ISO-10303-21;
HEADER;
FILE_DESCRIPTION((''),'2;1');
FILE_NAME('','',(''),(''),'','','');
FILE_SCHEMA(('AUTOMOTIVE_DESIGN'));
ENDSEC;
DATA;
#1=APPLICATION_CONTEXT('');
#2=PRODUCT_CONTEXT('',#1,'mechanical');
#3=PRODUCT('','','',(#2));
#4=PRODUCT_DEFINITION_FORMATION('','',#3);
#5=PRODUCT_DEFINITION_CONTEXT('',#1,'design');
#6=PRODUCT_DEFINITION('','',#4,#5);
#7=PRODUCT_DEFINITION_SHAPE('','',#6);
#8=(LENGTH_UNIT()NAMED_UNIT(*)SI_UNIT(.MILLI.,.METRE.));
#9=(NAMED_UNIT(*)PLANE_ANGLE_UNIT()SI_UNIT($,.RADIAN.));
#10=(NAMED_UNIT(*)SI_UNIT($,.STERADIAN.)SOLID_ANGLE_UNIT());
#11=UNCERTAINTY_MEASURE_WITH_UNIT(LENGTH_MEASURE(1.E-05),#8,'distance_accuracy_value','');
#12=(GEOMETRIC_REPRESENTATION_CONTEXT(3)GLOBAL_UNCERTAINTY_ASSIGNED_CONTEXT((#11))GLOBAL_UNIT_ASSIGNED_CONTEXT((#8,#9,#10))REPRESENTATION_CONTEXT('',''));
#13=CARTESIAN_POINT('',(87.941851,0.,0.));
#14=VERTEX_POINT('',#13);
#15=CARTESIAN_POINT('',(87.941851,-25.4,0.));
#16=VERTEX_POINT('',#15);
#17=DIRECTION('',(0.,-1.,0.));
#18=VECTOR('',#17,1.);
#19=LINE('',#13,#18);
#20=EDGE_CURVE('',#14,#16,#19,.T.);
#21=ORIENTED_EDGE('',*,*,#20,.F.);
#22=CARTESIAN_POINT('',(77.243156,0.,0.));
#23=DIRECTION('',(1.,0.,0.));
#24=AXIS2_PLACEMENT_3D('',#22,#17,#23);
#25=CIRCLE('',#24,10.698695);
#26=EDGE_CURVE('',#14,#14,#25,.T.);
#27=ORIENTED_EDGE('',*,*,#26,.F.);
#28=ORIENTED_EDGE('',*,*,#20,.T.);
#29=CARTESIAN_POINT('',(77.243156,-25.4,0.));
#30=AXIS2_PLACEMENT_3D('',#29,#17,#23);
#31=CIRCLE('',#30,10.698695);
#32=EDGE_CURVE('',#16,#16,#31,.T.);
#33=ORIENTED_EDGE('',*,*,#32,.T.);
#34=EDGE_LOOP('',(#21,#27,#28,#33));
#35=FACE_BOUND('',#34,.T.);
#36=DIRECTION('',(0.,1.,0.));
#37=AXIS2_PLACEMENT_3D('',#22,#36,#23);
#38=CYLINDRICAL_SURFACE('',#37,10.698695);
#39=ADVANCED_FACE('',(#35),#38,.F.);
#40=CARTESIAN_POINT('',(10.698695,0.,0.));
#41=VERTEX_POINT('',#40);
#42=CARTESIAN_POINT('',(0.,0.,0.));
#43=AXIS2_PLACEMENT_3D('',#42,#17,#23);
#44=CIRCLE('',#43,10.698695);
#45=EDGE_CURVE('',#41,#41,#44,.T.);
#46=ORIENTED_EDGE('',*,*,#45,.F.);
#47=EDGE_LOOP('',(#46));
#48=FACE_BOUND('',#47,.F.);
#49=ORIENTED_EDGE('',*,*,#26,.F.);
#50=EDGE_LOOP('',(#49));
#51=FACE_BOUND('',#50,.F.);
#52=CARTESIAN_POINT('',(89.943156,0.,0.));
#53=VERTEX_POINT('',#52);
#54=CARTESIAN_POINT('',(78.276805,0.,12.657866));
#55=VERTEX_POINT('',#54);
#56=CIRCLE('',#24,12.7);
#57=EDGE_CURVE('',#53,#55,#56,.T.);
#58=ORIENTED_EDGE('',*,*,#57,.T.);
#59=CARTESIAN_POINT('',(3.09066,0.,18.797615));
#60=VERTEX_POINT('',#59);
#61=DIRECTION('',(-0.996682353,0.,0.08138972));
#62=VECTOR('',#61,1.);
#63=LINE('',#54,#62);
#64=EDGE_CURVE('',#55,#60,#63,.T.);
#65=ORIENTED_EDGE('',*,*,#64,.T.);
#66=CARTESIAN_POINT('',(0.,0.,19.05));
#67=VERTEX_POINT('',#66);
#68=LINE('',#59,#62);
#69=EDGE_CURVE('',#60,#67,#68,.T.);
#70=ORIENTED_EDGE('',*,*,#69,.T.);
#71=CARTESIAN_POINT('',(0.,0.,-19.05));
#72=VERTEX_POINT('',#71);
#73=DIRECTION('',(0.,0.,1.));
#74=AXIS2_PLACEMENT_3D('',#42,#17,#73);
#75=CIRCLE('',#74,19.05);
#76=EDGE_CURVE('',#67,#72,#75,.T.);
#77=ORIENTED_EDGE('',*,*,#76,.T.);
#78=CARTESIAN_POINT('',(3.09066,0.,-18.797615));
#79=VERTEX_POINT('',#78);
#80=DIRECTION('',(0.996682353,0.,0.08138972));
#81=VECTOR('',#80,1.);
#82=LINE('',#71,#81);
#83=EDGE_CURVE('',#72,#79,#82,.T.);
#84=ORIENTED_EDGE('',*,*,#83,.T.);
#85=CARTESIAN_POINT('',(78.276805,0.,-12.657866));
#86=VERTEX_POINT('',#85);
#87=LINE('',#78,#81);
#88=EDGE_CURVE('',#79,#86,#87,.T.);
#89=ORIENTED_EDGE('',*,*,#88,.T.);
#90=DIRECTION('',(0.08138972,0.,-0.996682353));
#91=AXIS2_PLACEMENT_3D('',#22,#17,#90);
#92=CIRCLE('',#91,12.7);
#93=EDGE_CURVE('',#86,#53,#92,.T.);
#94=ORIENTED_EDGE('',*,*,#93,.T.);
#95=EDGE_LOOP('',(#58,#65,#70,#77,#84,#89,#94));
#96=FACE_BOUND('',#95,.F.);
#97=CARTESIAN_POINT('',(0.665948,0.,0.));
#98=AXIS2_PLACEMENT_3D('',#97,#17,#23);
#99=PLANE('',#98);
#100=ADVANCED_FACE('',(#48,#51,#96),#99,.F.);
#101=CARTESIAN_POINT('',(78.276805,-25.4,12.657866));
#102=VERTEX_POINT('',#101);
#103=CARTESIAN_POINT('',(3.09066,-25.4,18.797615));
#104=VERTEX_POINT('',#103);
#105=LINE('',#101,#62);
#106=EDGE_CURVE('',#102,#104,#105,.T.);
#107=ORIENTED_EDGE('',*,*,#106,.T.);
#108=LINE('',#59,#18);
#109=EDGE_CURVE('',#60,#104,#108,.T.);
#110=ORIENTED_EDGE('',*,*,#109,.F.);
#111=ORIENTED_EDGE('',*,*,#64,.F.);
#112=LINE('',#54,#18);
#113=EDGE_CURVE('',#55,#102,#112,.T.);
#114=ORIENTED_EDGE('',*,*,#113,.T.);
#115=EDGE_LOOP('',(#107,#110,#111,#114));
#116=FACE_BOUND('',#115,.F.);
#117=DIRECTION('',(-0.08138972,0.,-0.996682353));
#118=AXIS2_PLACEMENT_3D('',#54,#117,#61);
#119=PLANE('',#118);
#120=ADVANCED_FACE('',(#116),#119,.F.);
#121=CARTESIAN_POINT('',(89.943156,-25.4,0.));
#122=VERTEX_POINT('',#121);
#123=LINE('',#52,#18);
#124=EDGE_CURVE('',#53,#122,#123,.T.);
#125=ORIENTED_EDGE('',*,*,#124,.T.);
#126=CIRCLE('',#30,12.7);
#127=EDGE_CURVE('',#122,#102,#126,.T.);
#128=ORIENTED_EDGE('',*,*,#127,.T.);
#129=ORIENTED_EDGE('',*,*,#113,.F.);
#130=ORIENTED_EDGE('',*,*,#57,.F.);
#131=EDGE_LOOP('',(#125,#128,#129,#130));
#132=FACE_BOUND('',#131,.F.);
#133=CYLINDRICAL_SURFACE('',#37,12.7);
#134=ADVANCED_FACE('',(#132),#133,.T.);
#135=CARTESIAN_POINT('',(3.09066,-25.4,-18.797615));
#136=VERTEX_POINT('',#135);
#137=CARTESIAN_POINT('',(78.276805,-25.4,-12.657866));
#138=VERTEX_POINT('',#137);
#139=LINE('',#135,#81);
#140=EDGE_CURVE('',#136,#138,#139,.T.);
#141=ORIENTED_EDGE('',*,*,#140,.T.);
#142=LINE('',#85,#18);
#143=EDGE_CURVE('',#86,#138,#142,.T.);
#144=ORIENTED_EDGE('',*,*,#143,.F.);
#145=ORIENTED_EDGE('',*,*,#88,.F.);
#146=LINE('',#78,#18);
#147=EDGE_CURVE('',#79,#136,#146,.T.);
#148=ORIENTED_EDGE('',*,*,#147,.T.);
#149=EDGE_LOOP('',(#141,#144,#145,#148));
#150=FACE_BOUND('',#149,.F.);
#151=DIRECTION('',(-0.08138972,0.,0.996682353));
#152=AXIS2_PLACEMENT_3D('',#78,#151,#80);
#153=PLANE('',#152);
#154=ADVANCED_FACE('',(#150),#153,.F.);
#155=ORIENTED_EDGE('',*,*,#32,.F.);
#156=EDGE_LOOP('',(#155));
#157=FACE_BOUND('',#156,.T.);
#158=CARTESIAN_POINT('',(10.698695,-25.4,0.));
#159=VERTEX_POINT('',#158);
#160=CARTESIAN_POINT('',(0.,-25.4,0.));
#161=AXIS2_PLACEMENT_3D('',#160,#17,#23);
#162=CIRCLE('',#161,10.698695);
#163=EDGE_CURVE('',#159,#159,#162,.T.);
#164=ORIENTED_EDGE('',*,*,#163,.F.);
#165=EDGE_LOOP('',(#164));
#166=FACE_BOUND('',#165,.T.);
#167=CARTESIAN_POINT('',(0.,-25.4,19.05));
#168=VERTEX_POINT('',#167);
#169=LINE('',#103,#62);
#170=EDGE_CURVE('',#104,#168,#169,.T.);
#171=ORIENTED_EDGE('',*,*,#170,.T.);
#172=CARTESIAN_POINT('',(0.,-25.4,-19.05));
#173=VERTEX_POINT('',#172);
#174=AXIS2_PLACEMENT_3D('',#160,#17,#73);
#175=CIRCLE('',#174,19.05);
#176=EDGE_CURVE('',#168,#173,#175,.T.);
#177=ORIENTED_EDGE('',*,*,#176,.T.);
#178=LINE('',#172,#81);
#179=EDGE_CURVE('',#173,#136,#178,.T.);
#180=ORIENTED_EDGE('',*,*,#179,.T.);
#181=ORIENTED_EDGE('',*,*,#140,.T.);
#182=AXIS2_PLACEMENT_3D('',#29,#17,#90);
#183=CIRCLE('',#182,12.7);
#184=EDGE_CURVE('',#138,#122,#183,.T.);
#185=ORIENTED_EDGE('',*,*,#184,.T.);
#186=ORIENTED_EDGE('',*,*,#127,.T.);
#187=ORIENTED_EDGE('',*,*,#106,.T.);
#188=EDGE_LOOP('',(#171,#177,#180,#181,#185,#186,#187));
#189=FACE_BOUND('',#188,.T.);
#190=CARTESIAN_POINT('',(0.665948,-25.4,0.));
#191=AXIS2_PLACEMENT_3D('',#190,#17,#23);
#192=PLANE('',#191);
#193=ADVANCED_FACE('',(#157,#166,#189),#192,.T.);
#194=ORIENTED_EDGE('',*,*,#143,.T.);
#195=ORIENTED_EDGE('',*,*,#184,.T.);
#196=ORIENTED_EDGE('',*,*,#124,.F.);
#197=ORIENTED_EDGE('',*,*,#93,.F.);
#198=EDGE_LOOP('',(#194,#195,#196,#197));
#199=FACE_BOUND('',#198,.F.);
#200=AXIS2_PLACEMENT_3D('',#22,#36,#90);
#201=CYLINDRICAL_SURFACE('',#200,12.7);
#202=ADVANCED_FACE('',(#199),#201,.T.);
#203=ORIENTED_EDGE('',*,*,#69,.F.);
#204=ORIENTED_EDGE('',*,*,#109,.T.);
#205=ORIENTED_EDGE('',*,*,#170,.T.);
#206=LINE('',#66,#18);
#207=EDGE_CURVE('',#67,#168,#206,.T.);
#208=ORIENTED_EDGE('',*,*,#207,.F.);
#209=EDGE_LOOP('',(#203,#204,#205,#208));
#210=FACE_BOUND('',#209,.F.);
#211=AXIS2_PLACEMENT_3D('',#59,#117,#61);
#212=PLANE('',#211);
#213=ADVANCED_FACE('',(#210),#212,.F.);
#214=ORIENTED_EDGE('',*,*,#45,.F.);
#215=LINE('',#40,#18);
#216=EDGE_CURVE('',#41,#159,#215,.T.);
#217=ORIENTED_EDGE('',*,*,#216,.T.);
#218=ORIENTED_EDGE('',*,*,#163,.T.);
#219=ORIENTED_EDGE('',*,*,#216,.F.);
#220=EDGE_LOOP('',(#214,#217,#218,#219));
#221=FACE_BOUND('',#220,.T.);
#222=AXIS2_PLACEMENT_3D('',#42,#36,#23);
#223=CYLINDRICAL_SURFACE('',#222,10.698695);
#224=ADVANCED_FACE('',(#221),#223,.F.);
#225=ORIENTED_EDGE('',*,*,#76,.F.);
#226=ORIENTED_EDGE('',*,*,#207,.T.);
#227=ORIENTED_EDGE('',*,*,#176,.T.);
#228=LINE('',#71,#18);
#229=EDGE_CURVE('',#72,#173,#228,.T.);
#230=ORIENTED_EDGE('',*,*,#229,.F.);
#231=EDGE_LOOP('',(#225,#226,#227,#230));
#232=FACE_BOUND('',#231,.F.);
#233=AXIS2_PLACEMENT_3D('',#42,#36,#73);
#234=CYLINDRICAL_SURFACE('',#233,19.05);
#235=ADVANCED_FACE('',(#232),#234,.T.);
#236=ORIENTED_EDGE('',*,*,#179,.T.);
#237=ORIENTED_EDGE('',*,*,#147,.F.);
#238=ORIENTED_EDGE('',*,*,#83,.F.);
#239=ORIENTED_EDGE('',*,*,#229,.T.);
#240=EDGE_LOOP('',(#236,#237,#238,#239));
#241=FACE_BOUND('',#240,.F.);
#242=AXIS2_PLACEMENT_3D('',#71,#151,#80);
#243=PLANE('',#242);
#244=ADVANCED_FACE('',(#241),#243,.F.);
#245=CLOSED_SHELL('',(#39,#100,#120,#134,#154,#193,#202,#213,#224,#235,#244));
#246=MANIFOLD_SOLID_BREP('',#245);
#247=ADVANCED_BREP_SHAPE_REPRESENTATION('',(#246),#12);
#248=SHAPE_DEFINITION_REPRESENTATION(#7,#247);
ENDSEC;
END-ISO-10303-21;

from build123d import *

# Parameters (mm, degrees)
F0_R     = 10.6986953421
F1_DEPTH = 25.4


with BuildPart() as f1:
    # F0 (on Front) → F1 (new body)
    with BuildSketch(Plane.XZ):
        with BuildLine():
            Line((3.0906604896, 18.7976146821), (0, 19.05))
            ThreePointArc((0, 19.05), (-19.05, 0), (0, -19.05))
            Line((0, -19.05), (3.0906604896, -18.7976146821))
            ThreePointArc((3.0906604896, -18.7976146821), (14.5220450063, -12.3293434065), (19.05, 0))
            ThreePointArc((19.05, 0), (14.5220450063, 12.3293434065), (3.0906604896, 18.7976146821))
        make_face()
        Circle(F0_R, mode=Mode.SUBTRACT)
        with BuildLine():
            Line((78.2768051379, 12.6578658873), (3.0906604896, 18.7976146821))
            ThreePointArc((3.0906604896, 18.7976146821), (14.5220450063, 12.3293434065), (19.05, 0))
            ThreePointArc((19.05, 0), (14.5220450063, -12.3293434065), (3.0906604896, -18.7976146821))
            Line((3.0906604896, -18.7976146821), (78.2768051379, -12.6578658873))
            ThreePointArc((78.2768051379, -12.6578658873), (64.5431556911, 0), (78.2768051379, 12.6578658873))
        make_face()
        with BuildLine():
            ThreePointArc((89.9431556911, 0), (86.5817141445, 8.6070509475), (78.2768051379, 12.6578658873))
            ThreePointArc((78.2768051379, 12.6578658873), (64.5431556911, 0), (78.2768051379, -12.6578658873))
            ThreePointArc((78.2768051379, -12.6578658873), (86.5817141445, -8.6070509475), (89.9431556911, 0))
        make_face()
        with Locations((77.2431556911, 0)):
            Circle(F0_R, mode=Mode.SUBTRACT)
    extrude(amount=F1_DEPTH)


solid = f1.part
